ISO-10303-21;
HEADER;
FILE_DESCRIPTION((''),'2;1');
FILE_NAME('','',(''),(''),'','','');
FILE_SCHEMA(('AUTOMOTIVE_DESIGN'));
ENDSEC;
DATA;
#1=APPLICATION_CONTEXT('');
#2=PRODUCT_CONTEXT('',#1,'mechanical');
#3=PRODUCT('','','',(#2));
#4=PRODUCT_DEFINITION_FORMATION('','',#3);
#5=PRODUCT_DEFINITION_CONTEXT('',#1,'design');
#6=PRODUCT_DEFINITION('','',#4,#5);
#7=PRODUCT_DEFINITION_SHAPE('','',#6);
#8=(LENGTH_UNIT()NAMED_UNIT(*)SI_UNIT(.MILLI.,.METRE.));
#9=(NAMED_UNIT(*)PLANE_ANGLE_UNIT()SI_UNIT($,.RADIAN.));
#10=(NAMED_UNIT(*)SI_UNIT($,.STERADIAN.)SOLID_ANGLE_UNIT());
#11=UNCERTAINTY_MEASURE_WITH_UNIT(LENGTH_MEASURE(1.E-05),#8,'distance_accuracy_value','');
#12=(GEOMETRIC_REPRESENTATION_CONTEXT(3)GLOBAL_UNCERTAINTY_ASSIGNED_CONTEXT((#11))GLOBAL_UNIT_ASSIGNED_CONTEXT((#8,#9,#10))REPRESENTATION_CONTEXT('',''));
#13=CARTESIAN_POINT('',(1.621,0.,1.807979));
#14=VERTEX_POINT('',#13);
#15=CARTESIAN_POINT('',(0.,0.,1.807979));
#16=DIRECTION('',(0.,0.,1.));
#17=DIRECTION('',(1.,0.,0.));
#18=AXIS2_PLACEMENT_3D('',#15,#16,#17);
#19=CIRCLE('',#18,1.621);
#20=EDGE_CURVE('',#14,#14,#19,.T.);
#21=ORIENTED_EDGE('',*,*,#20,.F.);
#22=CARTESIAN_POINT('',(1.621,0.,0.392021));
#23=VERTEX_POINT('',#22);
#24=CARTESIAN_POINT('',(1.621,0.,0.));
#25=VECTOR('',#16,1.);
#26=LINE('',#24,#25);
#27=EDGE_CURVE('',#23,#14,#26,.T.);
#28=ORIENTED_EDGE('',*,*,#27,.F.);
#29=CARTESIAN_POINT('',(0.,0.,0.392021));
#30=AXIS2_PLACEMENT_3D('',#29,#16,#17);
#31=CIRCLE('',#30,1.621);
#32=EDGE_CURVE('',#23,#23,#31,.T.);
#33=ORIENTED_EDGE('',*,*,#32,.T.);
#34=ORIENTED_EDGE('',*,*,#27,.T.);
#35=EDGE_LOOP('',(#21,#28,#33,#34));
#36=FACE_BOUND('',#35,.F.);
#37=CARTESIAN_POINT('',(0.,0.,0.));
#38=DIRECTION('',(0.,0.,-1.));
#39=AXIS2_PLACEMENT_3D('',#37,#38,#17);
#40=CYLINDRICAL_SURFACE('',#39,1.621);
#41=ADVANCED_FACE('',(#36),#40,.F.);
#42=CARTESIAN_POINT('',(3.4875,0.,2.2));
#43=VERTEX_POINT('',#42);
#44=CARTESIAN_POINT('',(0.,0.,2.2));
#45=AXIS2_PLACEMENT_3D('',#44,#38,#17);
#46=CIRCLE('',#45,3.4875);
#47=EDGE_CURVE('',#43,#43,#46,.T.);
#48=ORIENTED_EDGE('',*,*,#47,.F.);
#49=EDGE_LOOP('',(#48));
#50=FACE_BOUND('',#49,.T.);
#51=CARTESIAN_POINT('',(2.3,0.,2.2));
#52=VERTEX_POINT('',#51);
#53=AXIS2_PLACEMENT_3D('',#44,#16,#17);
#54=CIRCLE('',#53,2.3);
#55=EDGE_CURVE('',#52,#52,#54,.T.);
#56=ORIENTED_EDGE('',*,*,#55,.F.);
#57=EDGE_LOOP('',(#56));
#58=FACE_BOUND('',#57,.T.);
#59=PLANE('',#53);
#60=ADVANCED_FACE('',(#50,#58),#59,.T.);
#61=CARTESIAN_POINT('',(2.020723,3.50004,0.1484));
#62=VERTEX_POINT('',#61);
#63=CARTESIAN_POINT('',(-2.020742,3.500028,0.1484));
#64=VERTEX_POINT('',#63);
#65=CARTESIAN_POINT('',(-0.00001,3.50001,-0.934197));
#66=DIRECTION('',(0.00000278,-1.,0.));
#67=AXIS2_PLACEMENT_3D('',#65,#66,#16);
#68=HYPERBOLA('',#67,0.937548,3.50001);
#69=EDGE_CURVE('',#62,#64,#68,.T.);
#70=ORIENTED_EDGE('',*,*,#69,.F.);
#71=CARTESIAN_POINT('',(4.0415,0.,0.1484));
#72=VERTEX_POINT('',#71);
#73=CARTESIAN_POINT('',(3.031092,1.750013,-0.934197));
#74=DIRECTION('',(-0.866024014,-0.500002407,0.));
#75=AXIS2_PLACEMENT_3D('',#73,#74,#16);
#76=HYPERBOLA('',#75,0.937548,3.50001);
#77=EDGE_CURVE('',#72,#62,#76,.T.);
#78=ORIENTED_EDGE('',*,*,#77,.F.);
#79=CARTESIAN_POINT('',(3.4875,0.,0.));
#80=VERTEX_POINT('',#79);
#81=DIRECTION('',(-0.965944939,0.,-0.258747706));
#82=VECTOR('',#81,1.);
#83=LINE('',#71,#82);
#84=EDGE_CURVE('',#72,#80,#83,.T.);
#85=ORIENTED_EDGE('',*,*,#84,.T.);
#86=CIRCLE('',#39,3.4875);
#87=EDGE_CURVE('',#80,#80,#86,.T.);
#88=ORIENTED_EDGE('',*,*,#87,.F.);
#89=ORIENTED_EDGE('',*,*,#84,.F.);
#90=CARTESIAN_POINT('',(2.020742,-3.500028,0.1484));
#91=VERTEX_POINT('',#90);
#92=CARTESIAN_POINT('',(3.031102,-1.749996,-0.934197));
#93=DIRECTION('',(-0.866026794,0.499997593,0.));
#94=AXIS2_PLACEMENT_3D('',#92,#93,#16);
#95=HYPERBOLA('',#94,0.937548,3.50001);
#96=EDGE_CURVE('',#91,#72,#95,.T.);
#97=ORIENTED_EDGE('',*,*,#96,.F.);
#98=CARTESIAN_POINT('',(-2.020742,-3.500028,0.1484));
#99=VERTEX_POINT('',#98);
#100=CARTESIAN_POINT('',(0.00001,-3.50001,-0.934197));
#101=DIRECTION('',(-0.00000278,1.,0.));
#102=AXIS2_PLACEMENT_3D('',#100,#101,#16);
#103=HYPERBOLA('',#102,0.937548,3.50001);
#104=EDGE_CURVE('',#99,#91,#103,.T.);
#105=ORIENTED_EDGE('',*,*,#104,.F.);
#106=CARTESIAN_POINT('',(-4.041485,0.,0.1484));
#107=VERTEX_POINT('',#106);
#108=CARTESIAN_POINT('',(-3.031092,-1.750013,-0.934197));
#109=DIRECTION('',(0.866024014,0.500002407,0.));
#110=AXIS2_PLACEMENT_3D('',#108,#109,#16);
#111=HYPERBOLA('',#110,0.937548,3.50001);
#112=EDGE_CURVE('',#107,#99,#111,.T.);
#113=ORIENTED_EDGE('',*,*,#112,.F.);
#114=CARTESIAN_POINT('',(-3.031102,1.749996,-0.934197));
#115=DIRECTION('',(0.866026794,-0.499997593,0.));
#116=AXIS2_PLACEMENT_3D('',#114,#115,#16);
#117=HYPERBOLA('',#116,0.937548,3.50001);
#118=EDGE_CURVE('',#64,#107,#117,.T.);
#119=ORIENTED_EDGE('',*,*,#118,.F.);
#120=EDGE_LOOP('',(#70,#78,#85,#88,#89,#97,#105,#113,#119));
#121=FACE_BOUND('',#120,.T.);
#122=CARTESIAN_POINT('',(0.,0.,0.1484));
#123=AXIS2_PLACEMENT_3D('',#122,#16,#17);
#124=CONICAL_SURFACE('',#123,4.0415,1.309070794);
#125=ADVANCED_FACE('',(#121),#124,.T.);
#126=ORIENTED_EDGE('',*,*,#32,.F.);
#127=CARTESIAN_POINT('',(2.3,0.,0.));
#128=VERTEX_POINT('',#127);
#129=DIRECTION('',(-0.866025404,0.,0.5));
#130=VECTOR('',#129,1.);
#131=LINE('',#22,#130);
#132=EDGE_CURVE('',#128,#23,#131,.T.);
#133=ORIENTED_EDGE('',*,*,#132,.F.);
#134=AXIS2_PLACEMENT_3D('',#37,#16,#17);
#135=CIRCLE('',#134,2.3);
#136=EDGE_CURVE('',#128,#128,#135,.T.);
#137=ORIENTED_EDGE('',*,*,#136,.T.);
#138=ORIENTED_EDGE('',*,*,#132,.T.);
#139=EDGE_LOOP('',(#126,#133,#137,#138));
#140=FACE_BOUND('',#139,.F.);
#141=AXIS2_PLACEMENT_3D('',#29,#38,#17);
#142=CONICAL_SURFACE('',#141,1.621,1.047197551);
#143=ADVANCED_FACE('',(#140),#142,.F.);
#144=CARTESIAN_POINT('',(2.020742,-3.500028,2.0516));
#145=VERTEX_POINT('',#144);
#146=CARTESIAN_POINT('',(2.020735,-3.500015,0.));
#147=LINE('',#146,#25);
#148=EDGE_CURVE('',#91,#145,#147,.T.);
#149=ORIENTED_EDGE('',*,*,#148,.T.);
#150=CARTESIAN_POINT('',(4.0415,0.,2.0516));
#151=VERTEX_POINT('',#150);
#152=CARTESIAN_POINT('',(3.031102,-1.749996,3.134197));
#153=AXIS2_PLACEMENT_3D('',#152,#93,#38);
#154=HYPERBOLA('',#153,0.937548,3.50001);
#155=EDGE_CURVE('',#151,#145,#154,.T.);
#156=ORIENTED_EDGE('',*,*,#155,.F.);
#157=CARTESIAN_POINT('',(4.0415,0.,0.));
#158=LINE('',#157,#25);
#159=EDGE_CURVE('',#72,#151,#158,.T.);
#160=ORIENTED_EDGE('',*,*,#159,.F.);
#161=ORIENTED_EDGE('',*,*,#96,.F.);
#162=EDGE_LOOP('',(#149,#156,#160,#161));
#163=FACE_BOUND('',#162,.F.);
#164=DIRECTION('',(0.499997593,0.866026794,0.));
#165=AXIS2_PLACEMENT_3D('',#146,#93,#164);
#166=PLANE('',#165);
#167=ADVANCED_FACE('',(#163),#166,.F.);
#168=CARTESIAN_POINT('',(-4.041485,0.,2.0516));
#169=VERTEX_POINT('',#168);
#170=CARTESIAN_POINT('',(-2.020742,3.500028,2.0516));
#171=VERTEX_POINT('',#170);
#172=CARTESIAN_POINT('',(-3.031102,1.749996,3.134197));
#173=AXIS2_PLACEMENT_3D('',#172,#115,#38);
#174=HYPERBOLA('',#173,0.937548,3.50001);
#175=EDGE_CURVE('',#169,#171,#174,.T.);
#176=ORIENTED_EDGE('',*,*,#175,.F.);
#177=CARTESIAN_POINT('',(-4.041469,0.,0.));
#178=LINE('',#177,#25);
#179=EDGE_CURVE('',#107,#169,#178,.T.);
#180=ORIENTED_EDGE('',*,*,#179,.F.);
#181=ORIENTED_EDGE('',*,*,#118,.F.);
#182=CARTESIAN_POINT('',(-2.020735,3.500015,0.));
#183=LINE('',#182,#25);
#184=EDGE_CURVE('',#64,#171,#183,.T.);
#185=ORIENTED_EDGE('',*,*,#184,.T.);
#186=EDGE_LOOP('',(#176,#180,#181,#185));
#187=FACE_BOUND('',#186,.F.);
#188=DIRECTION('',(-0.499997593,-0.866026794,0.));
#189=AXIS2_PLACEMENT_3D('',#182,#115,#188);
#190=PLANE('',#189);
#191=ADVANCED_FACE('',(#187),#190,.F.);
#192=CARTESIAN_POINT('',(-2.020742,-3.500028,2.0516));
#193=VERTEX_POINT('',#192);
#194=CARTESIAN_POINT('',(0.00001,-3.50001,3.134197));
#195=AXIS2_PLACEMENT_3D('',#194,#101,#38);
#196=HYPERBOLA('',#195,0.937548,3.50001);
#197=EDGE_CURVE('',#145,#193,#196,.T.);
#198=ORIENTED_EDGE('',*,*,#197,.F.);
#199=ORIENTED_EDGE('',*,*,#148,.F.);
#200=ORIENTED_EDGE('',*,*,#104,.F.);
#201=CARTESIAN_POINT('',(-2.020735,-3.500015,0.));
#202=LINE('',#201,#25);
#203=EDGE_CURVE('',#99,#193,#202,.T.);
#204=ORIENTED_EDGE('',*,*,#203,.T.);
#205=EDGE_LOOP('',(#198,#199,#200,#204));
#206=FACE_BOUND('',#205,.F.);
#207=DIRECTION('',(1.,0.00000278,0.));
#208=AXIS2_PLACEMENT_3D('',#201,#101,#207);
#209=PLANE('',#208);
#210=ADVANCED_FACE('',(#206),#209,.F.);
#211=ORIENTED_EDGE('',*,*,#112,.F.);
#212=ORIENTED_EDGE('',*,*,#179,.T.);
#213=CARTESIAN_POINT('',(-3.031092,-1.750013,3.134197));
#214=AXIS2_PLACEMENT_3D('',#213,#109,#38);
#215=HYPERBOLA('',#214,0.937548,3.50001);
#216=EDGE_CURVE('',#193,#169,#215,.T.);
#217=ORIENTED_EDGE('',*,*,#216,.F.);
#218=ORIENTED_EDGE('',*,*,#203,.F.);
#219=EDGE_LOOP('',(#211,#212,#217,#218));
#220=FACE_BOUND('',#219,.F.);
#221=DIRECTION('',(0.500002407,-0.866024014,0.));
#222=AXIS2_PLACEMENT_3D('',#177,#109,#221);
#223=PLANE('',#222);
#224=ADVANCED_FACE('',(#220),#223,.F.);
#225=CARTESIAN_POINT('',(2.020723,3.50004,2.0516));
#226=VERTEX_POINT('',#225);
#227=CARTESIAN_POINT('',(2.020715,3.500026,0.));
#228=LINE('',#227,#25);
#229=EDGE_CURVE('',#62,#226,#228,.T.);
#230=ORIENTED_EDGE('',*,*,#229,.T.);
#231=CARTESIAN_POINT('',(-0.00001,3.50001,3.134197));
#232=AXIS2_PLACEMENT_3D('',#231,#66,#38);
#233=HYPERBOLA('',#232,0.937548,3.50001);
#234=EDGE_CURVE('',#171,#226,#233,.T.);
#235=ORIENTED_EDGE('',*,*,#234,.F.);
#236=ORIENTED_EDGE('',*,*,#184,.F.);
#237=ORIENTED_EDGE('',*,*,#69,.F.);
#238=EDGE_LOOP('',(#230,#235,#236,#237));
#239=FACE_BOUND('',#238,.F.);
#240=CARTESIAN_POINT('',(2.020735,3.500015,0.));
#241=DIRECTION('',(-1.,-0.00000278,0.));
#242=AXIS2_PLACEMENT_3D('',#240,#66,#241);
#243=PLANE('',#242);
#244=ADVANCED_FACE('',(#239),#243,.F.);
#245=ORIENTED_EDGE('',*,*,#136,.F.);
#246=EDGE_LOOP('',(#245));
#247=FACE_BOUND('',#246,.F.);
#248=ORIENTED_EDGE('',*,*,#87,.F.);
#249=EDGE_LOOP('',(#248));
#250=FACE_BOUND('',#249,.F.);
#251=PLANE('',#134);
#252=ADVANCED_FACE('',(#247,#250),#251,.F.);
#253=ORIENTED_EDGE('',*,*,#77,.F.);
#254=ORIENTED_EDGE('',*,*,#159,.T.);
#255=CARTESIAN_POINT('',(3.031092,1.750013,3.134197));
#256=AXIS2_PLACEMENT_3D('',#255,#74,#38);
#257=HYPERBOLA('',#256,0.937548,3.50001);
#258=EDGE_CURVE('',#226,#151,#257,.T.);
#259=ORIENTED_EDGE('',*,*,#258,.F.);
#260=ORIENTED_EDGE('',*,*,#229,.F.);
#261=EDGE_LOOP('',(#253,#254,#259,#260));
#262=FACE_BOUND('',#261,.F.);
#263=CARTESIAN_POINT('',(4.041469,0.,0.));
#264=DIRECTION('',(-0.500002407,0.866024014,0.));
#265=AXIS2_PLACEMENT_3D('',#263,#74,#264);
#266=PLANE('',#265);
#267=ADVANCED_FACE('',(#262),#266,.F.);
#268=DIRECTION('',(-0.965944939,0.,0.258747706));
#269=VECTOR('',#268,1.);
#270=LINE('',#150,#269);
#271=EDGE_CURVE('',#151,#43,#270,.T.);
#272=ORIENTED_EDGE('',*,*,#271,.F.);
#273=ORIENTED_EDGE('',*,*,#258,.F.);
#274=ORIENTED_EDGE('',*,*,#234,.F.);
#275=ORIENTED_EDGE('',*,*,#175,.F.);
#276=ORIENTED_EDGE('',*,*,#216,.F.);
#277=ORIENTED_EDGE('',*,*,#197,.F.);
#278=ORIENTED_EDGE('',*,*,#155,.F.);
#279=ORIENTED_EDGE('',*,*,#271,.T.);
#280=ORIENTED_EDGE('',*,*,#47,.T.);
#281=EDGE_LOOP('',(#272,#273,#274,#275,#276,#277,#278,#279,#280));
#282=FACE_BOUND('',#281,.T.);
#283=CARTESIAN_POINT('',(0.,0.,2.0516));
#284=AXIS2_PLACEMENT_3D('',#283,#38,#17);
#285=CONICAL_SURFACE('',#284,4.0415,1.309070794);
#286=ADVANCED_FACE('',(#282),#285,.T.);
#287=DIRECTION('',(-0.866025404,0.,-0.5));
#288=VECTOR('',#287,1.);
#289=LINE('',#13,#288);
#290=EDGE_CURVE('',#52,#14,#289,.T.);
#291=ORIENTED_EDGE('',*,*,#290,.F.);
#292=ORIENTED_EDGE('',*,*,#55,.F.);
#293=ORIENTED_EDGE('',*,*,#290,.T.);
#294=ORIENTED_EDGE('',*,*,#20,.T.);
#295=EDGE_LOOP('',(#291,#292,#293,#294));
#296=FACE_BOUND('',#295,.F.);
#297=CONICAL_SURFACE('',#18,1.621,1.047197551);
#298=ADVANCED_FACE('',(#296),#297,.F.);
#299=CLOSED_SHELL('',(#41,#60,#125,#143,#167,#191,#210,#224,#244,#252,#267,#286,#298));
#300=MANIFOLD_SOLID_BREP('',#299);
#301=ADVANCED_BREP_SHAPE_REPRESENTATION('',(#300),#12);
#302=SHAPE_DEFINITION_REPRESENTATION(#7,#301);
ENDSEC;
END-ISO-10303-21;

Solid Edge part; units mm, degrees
sketch "Sketch1" plane through (0, 0, 0) normal (0, 0, 1) x (1, 0, 0)
  circle A0 centre (0, 0) radius 1.621
  circle A1 centre (0, 0) radius 4.0415
  dimension "D1" = 3.5
  dimension "D2" = 3.242
extrude "Protrusion1" add sketch "Sketch1" along normal blind 2.2
sketch "Sketch2" plane through (0, 0, 0) normal (0, 0, 1) x (1, 0, 0)
  line L0 (4.0415, 0) -> (2.0207, 3.5)
  arc A0 (2.0207, 3.5) -> (4.0415, 0) centre (0, 0) cw
  dimension "D1" = 3.5
extrude "ExtrudedCutout_1" cut sketch "Sketch2" along normal blind 2.2
pattern_circular "Pattern1" count 6 over 360 about axis through (0, 0, 0) along (0, 0, -1) of "ExtrudedCutout_1"
cosmetic_thread "Thread_1" size "M4" thread depth 2.2
sketch "Sketch3" plane through (0, 0, 0) normal (0, -1, 0) x (1, 0, 0)
  line L0 (4.0415, 0.1484) -> (3.4875, 0)
  line L1 (3.4875, 0) -> (4.0415, 0)
  line L2 (4.0415, 0) -> (4.0415, 0.1484)
  line L3 (3.4875, 2.2) -> (4.0415, 2.2)
  line L4 (4.0415, 2.2) -> (4.0415, 2.0516)
  line L5 (4.0415, 2.0516) -> (3.4875, 2.2)
  dimension "D1" = 2.2
  dimension "D2" = 3.4875
  dimension "D3" = 4.0415
revolve "RevolvedCutout_1" cut sketch "Sketch3" angle 360 about axis through (0, 0, 8.4) along (0, 0, -1)
chamfer "Chamfer_1" distance 0.679 angle 30 1 edges at (-1.621, 0, 0) measured on face at (-2.3947, -2.2552, 0)
chamfer "Chamfer_2" distance 0.679 angle 30 1 edges at (-1.621, 0, 2.2) measured on face at (-2.3947, -2.2552, 2.2)
properties material "Steel"
